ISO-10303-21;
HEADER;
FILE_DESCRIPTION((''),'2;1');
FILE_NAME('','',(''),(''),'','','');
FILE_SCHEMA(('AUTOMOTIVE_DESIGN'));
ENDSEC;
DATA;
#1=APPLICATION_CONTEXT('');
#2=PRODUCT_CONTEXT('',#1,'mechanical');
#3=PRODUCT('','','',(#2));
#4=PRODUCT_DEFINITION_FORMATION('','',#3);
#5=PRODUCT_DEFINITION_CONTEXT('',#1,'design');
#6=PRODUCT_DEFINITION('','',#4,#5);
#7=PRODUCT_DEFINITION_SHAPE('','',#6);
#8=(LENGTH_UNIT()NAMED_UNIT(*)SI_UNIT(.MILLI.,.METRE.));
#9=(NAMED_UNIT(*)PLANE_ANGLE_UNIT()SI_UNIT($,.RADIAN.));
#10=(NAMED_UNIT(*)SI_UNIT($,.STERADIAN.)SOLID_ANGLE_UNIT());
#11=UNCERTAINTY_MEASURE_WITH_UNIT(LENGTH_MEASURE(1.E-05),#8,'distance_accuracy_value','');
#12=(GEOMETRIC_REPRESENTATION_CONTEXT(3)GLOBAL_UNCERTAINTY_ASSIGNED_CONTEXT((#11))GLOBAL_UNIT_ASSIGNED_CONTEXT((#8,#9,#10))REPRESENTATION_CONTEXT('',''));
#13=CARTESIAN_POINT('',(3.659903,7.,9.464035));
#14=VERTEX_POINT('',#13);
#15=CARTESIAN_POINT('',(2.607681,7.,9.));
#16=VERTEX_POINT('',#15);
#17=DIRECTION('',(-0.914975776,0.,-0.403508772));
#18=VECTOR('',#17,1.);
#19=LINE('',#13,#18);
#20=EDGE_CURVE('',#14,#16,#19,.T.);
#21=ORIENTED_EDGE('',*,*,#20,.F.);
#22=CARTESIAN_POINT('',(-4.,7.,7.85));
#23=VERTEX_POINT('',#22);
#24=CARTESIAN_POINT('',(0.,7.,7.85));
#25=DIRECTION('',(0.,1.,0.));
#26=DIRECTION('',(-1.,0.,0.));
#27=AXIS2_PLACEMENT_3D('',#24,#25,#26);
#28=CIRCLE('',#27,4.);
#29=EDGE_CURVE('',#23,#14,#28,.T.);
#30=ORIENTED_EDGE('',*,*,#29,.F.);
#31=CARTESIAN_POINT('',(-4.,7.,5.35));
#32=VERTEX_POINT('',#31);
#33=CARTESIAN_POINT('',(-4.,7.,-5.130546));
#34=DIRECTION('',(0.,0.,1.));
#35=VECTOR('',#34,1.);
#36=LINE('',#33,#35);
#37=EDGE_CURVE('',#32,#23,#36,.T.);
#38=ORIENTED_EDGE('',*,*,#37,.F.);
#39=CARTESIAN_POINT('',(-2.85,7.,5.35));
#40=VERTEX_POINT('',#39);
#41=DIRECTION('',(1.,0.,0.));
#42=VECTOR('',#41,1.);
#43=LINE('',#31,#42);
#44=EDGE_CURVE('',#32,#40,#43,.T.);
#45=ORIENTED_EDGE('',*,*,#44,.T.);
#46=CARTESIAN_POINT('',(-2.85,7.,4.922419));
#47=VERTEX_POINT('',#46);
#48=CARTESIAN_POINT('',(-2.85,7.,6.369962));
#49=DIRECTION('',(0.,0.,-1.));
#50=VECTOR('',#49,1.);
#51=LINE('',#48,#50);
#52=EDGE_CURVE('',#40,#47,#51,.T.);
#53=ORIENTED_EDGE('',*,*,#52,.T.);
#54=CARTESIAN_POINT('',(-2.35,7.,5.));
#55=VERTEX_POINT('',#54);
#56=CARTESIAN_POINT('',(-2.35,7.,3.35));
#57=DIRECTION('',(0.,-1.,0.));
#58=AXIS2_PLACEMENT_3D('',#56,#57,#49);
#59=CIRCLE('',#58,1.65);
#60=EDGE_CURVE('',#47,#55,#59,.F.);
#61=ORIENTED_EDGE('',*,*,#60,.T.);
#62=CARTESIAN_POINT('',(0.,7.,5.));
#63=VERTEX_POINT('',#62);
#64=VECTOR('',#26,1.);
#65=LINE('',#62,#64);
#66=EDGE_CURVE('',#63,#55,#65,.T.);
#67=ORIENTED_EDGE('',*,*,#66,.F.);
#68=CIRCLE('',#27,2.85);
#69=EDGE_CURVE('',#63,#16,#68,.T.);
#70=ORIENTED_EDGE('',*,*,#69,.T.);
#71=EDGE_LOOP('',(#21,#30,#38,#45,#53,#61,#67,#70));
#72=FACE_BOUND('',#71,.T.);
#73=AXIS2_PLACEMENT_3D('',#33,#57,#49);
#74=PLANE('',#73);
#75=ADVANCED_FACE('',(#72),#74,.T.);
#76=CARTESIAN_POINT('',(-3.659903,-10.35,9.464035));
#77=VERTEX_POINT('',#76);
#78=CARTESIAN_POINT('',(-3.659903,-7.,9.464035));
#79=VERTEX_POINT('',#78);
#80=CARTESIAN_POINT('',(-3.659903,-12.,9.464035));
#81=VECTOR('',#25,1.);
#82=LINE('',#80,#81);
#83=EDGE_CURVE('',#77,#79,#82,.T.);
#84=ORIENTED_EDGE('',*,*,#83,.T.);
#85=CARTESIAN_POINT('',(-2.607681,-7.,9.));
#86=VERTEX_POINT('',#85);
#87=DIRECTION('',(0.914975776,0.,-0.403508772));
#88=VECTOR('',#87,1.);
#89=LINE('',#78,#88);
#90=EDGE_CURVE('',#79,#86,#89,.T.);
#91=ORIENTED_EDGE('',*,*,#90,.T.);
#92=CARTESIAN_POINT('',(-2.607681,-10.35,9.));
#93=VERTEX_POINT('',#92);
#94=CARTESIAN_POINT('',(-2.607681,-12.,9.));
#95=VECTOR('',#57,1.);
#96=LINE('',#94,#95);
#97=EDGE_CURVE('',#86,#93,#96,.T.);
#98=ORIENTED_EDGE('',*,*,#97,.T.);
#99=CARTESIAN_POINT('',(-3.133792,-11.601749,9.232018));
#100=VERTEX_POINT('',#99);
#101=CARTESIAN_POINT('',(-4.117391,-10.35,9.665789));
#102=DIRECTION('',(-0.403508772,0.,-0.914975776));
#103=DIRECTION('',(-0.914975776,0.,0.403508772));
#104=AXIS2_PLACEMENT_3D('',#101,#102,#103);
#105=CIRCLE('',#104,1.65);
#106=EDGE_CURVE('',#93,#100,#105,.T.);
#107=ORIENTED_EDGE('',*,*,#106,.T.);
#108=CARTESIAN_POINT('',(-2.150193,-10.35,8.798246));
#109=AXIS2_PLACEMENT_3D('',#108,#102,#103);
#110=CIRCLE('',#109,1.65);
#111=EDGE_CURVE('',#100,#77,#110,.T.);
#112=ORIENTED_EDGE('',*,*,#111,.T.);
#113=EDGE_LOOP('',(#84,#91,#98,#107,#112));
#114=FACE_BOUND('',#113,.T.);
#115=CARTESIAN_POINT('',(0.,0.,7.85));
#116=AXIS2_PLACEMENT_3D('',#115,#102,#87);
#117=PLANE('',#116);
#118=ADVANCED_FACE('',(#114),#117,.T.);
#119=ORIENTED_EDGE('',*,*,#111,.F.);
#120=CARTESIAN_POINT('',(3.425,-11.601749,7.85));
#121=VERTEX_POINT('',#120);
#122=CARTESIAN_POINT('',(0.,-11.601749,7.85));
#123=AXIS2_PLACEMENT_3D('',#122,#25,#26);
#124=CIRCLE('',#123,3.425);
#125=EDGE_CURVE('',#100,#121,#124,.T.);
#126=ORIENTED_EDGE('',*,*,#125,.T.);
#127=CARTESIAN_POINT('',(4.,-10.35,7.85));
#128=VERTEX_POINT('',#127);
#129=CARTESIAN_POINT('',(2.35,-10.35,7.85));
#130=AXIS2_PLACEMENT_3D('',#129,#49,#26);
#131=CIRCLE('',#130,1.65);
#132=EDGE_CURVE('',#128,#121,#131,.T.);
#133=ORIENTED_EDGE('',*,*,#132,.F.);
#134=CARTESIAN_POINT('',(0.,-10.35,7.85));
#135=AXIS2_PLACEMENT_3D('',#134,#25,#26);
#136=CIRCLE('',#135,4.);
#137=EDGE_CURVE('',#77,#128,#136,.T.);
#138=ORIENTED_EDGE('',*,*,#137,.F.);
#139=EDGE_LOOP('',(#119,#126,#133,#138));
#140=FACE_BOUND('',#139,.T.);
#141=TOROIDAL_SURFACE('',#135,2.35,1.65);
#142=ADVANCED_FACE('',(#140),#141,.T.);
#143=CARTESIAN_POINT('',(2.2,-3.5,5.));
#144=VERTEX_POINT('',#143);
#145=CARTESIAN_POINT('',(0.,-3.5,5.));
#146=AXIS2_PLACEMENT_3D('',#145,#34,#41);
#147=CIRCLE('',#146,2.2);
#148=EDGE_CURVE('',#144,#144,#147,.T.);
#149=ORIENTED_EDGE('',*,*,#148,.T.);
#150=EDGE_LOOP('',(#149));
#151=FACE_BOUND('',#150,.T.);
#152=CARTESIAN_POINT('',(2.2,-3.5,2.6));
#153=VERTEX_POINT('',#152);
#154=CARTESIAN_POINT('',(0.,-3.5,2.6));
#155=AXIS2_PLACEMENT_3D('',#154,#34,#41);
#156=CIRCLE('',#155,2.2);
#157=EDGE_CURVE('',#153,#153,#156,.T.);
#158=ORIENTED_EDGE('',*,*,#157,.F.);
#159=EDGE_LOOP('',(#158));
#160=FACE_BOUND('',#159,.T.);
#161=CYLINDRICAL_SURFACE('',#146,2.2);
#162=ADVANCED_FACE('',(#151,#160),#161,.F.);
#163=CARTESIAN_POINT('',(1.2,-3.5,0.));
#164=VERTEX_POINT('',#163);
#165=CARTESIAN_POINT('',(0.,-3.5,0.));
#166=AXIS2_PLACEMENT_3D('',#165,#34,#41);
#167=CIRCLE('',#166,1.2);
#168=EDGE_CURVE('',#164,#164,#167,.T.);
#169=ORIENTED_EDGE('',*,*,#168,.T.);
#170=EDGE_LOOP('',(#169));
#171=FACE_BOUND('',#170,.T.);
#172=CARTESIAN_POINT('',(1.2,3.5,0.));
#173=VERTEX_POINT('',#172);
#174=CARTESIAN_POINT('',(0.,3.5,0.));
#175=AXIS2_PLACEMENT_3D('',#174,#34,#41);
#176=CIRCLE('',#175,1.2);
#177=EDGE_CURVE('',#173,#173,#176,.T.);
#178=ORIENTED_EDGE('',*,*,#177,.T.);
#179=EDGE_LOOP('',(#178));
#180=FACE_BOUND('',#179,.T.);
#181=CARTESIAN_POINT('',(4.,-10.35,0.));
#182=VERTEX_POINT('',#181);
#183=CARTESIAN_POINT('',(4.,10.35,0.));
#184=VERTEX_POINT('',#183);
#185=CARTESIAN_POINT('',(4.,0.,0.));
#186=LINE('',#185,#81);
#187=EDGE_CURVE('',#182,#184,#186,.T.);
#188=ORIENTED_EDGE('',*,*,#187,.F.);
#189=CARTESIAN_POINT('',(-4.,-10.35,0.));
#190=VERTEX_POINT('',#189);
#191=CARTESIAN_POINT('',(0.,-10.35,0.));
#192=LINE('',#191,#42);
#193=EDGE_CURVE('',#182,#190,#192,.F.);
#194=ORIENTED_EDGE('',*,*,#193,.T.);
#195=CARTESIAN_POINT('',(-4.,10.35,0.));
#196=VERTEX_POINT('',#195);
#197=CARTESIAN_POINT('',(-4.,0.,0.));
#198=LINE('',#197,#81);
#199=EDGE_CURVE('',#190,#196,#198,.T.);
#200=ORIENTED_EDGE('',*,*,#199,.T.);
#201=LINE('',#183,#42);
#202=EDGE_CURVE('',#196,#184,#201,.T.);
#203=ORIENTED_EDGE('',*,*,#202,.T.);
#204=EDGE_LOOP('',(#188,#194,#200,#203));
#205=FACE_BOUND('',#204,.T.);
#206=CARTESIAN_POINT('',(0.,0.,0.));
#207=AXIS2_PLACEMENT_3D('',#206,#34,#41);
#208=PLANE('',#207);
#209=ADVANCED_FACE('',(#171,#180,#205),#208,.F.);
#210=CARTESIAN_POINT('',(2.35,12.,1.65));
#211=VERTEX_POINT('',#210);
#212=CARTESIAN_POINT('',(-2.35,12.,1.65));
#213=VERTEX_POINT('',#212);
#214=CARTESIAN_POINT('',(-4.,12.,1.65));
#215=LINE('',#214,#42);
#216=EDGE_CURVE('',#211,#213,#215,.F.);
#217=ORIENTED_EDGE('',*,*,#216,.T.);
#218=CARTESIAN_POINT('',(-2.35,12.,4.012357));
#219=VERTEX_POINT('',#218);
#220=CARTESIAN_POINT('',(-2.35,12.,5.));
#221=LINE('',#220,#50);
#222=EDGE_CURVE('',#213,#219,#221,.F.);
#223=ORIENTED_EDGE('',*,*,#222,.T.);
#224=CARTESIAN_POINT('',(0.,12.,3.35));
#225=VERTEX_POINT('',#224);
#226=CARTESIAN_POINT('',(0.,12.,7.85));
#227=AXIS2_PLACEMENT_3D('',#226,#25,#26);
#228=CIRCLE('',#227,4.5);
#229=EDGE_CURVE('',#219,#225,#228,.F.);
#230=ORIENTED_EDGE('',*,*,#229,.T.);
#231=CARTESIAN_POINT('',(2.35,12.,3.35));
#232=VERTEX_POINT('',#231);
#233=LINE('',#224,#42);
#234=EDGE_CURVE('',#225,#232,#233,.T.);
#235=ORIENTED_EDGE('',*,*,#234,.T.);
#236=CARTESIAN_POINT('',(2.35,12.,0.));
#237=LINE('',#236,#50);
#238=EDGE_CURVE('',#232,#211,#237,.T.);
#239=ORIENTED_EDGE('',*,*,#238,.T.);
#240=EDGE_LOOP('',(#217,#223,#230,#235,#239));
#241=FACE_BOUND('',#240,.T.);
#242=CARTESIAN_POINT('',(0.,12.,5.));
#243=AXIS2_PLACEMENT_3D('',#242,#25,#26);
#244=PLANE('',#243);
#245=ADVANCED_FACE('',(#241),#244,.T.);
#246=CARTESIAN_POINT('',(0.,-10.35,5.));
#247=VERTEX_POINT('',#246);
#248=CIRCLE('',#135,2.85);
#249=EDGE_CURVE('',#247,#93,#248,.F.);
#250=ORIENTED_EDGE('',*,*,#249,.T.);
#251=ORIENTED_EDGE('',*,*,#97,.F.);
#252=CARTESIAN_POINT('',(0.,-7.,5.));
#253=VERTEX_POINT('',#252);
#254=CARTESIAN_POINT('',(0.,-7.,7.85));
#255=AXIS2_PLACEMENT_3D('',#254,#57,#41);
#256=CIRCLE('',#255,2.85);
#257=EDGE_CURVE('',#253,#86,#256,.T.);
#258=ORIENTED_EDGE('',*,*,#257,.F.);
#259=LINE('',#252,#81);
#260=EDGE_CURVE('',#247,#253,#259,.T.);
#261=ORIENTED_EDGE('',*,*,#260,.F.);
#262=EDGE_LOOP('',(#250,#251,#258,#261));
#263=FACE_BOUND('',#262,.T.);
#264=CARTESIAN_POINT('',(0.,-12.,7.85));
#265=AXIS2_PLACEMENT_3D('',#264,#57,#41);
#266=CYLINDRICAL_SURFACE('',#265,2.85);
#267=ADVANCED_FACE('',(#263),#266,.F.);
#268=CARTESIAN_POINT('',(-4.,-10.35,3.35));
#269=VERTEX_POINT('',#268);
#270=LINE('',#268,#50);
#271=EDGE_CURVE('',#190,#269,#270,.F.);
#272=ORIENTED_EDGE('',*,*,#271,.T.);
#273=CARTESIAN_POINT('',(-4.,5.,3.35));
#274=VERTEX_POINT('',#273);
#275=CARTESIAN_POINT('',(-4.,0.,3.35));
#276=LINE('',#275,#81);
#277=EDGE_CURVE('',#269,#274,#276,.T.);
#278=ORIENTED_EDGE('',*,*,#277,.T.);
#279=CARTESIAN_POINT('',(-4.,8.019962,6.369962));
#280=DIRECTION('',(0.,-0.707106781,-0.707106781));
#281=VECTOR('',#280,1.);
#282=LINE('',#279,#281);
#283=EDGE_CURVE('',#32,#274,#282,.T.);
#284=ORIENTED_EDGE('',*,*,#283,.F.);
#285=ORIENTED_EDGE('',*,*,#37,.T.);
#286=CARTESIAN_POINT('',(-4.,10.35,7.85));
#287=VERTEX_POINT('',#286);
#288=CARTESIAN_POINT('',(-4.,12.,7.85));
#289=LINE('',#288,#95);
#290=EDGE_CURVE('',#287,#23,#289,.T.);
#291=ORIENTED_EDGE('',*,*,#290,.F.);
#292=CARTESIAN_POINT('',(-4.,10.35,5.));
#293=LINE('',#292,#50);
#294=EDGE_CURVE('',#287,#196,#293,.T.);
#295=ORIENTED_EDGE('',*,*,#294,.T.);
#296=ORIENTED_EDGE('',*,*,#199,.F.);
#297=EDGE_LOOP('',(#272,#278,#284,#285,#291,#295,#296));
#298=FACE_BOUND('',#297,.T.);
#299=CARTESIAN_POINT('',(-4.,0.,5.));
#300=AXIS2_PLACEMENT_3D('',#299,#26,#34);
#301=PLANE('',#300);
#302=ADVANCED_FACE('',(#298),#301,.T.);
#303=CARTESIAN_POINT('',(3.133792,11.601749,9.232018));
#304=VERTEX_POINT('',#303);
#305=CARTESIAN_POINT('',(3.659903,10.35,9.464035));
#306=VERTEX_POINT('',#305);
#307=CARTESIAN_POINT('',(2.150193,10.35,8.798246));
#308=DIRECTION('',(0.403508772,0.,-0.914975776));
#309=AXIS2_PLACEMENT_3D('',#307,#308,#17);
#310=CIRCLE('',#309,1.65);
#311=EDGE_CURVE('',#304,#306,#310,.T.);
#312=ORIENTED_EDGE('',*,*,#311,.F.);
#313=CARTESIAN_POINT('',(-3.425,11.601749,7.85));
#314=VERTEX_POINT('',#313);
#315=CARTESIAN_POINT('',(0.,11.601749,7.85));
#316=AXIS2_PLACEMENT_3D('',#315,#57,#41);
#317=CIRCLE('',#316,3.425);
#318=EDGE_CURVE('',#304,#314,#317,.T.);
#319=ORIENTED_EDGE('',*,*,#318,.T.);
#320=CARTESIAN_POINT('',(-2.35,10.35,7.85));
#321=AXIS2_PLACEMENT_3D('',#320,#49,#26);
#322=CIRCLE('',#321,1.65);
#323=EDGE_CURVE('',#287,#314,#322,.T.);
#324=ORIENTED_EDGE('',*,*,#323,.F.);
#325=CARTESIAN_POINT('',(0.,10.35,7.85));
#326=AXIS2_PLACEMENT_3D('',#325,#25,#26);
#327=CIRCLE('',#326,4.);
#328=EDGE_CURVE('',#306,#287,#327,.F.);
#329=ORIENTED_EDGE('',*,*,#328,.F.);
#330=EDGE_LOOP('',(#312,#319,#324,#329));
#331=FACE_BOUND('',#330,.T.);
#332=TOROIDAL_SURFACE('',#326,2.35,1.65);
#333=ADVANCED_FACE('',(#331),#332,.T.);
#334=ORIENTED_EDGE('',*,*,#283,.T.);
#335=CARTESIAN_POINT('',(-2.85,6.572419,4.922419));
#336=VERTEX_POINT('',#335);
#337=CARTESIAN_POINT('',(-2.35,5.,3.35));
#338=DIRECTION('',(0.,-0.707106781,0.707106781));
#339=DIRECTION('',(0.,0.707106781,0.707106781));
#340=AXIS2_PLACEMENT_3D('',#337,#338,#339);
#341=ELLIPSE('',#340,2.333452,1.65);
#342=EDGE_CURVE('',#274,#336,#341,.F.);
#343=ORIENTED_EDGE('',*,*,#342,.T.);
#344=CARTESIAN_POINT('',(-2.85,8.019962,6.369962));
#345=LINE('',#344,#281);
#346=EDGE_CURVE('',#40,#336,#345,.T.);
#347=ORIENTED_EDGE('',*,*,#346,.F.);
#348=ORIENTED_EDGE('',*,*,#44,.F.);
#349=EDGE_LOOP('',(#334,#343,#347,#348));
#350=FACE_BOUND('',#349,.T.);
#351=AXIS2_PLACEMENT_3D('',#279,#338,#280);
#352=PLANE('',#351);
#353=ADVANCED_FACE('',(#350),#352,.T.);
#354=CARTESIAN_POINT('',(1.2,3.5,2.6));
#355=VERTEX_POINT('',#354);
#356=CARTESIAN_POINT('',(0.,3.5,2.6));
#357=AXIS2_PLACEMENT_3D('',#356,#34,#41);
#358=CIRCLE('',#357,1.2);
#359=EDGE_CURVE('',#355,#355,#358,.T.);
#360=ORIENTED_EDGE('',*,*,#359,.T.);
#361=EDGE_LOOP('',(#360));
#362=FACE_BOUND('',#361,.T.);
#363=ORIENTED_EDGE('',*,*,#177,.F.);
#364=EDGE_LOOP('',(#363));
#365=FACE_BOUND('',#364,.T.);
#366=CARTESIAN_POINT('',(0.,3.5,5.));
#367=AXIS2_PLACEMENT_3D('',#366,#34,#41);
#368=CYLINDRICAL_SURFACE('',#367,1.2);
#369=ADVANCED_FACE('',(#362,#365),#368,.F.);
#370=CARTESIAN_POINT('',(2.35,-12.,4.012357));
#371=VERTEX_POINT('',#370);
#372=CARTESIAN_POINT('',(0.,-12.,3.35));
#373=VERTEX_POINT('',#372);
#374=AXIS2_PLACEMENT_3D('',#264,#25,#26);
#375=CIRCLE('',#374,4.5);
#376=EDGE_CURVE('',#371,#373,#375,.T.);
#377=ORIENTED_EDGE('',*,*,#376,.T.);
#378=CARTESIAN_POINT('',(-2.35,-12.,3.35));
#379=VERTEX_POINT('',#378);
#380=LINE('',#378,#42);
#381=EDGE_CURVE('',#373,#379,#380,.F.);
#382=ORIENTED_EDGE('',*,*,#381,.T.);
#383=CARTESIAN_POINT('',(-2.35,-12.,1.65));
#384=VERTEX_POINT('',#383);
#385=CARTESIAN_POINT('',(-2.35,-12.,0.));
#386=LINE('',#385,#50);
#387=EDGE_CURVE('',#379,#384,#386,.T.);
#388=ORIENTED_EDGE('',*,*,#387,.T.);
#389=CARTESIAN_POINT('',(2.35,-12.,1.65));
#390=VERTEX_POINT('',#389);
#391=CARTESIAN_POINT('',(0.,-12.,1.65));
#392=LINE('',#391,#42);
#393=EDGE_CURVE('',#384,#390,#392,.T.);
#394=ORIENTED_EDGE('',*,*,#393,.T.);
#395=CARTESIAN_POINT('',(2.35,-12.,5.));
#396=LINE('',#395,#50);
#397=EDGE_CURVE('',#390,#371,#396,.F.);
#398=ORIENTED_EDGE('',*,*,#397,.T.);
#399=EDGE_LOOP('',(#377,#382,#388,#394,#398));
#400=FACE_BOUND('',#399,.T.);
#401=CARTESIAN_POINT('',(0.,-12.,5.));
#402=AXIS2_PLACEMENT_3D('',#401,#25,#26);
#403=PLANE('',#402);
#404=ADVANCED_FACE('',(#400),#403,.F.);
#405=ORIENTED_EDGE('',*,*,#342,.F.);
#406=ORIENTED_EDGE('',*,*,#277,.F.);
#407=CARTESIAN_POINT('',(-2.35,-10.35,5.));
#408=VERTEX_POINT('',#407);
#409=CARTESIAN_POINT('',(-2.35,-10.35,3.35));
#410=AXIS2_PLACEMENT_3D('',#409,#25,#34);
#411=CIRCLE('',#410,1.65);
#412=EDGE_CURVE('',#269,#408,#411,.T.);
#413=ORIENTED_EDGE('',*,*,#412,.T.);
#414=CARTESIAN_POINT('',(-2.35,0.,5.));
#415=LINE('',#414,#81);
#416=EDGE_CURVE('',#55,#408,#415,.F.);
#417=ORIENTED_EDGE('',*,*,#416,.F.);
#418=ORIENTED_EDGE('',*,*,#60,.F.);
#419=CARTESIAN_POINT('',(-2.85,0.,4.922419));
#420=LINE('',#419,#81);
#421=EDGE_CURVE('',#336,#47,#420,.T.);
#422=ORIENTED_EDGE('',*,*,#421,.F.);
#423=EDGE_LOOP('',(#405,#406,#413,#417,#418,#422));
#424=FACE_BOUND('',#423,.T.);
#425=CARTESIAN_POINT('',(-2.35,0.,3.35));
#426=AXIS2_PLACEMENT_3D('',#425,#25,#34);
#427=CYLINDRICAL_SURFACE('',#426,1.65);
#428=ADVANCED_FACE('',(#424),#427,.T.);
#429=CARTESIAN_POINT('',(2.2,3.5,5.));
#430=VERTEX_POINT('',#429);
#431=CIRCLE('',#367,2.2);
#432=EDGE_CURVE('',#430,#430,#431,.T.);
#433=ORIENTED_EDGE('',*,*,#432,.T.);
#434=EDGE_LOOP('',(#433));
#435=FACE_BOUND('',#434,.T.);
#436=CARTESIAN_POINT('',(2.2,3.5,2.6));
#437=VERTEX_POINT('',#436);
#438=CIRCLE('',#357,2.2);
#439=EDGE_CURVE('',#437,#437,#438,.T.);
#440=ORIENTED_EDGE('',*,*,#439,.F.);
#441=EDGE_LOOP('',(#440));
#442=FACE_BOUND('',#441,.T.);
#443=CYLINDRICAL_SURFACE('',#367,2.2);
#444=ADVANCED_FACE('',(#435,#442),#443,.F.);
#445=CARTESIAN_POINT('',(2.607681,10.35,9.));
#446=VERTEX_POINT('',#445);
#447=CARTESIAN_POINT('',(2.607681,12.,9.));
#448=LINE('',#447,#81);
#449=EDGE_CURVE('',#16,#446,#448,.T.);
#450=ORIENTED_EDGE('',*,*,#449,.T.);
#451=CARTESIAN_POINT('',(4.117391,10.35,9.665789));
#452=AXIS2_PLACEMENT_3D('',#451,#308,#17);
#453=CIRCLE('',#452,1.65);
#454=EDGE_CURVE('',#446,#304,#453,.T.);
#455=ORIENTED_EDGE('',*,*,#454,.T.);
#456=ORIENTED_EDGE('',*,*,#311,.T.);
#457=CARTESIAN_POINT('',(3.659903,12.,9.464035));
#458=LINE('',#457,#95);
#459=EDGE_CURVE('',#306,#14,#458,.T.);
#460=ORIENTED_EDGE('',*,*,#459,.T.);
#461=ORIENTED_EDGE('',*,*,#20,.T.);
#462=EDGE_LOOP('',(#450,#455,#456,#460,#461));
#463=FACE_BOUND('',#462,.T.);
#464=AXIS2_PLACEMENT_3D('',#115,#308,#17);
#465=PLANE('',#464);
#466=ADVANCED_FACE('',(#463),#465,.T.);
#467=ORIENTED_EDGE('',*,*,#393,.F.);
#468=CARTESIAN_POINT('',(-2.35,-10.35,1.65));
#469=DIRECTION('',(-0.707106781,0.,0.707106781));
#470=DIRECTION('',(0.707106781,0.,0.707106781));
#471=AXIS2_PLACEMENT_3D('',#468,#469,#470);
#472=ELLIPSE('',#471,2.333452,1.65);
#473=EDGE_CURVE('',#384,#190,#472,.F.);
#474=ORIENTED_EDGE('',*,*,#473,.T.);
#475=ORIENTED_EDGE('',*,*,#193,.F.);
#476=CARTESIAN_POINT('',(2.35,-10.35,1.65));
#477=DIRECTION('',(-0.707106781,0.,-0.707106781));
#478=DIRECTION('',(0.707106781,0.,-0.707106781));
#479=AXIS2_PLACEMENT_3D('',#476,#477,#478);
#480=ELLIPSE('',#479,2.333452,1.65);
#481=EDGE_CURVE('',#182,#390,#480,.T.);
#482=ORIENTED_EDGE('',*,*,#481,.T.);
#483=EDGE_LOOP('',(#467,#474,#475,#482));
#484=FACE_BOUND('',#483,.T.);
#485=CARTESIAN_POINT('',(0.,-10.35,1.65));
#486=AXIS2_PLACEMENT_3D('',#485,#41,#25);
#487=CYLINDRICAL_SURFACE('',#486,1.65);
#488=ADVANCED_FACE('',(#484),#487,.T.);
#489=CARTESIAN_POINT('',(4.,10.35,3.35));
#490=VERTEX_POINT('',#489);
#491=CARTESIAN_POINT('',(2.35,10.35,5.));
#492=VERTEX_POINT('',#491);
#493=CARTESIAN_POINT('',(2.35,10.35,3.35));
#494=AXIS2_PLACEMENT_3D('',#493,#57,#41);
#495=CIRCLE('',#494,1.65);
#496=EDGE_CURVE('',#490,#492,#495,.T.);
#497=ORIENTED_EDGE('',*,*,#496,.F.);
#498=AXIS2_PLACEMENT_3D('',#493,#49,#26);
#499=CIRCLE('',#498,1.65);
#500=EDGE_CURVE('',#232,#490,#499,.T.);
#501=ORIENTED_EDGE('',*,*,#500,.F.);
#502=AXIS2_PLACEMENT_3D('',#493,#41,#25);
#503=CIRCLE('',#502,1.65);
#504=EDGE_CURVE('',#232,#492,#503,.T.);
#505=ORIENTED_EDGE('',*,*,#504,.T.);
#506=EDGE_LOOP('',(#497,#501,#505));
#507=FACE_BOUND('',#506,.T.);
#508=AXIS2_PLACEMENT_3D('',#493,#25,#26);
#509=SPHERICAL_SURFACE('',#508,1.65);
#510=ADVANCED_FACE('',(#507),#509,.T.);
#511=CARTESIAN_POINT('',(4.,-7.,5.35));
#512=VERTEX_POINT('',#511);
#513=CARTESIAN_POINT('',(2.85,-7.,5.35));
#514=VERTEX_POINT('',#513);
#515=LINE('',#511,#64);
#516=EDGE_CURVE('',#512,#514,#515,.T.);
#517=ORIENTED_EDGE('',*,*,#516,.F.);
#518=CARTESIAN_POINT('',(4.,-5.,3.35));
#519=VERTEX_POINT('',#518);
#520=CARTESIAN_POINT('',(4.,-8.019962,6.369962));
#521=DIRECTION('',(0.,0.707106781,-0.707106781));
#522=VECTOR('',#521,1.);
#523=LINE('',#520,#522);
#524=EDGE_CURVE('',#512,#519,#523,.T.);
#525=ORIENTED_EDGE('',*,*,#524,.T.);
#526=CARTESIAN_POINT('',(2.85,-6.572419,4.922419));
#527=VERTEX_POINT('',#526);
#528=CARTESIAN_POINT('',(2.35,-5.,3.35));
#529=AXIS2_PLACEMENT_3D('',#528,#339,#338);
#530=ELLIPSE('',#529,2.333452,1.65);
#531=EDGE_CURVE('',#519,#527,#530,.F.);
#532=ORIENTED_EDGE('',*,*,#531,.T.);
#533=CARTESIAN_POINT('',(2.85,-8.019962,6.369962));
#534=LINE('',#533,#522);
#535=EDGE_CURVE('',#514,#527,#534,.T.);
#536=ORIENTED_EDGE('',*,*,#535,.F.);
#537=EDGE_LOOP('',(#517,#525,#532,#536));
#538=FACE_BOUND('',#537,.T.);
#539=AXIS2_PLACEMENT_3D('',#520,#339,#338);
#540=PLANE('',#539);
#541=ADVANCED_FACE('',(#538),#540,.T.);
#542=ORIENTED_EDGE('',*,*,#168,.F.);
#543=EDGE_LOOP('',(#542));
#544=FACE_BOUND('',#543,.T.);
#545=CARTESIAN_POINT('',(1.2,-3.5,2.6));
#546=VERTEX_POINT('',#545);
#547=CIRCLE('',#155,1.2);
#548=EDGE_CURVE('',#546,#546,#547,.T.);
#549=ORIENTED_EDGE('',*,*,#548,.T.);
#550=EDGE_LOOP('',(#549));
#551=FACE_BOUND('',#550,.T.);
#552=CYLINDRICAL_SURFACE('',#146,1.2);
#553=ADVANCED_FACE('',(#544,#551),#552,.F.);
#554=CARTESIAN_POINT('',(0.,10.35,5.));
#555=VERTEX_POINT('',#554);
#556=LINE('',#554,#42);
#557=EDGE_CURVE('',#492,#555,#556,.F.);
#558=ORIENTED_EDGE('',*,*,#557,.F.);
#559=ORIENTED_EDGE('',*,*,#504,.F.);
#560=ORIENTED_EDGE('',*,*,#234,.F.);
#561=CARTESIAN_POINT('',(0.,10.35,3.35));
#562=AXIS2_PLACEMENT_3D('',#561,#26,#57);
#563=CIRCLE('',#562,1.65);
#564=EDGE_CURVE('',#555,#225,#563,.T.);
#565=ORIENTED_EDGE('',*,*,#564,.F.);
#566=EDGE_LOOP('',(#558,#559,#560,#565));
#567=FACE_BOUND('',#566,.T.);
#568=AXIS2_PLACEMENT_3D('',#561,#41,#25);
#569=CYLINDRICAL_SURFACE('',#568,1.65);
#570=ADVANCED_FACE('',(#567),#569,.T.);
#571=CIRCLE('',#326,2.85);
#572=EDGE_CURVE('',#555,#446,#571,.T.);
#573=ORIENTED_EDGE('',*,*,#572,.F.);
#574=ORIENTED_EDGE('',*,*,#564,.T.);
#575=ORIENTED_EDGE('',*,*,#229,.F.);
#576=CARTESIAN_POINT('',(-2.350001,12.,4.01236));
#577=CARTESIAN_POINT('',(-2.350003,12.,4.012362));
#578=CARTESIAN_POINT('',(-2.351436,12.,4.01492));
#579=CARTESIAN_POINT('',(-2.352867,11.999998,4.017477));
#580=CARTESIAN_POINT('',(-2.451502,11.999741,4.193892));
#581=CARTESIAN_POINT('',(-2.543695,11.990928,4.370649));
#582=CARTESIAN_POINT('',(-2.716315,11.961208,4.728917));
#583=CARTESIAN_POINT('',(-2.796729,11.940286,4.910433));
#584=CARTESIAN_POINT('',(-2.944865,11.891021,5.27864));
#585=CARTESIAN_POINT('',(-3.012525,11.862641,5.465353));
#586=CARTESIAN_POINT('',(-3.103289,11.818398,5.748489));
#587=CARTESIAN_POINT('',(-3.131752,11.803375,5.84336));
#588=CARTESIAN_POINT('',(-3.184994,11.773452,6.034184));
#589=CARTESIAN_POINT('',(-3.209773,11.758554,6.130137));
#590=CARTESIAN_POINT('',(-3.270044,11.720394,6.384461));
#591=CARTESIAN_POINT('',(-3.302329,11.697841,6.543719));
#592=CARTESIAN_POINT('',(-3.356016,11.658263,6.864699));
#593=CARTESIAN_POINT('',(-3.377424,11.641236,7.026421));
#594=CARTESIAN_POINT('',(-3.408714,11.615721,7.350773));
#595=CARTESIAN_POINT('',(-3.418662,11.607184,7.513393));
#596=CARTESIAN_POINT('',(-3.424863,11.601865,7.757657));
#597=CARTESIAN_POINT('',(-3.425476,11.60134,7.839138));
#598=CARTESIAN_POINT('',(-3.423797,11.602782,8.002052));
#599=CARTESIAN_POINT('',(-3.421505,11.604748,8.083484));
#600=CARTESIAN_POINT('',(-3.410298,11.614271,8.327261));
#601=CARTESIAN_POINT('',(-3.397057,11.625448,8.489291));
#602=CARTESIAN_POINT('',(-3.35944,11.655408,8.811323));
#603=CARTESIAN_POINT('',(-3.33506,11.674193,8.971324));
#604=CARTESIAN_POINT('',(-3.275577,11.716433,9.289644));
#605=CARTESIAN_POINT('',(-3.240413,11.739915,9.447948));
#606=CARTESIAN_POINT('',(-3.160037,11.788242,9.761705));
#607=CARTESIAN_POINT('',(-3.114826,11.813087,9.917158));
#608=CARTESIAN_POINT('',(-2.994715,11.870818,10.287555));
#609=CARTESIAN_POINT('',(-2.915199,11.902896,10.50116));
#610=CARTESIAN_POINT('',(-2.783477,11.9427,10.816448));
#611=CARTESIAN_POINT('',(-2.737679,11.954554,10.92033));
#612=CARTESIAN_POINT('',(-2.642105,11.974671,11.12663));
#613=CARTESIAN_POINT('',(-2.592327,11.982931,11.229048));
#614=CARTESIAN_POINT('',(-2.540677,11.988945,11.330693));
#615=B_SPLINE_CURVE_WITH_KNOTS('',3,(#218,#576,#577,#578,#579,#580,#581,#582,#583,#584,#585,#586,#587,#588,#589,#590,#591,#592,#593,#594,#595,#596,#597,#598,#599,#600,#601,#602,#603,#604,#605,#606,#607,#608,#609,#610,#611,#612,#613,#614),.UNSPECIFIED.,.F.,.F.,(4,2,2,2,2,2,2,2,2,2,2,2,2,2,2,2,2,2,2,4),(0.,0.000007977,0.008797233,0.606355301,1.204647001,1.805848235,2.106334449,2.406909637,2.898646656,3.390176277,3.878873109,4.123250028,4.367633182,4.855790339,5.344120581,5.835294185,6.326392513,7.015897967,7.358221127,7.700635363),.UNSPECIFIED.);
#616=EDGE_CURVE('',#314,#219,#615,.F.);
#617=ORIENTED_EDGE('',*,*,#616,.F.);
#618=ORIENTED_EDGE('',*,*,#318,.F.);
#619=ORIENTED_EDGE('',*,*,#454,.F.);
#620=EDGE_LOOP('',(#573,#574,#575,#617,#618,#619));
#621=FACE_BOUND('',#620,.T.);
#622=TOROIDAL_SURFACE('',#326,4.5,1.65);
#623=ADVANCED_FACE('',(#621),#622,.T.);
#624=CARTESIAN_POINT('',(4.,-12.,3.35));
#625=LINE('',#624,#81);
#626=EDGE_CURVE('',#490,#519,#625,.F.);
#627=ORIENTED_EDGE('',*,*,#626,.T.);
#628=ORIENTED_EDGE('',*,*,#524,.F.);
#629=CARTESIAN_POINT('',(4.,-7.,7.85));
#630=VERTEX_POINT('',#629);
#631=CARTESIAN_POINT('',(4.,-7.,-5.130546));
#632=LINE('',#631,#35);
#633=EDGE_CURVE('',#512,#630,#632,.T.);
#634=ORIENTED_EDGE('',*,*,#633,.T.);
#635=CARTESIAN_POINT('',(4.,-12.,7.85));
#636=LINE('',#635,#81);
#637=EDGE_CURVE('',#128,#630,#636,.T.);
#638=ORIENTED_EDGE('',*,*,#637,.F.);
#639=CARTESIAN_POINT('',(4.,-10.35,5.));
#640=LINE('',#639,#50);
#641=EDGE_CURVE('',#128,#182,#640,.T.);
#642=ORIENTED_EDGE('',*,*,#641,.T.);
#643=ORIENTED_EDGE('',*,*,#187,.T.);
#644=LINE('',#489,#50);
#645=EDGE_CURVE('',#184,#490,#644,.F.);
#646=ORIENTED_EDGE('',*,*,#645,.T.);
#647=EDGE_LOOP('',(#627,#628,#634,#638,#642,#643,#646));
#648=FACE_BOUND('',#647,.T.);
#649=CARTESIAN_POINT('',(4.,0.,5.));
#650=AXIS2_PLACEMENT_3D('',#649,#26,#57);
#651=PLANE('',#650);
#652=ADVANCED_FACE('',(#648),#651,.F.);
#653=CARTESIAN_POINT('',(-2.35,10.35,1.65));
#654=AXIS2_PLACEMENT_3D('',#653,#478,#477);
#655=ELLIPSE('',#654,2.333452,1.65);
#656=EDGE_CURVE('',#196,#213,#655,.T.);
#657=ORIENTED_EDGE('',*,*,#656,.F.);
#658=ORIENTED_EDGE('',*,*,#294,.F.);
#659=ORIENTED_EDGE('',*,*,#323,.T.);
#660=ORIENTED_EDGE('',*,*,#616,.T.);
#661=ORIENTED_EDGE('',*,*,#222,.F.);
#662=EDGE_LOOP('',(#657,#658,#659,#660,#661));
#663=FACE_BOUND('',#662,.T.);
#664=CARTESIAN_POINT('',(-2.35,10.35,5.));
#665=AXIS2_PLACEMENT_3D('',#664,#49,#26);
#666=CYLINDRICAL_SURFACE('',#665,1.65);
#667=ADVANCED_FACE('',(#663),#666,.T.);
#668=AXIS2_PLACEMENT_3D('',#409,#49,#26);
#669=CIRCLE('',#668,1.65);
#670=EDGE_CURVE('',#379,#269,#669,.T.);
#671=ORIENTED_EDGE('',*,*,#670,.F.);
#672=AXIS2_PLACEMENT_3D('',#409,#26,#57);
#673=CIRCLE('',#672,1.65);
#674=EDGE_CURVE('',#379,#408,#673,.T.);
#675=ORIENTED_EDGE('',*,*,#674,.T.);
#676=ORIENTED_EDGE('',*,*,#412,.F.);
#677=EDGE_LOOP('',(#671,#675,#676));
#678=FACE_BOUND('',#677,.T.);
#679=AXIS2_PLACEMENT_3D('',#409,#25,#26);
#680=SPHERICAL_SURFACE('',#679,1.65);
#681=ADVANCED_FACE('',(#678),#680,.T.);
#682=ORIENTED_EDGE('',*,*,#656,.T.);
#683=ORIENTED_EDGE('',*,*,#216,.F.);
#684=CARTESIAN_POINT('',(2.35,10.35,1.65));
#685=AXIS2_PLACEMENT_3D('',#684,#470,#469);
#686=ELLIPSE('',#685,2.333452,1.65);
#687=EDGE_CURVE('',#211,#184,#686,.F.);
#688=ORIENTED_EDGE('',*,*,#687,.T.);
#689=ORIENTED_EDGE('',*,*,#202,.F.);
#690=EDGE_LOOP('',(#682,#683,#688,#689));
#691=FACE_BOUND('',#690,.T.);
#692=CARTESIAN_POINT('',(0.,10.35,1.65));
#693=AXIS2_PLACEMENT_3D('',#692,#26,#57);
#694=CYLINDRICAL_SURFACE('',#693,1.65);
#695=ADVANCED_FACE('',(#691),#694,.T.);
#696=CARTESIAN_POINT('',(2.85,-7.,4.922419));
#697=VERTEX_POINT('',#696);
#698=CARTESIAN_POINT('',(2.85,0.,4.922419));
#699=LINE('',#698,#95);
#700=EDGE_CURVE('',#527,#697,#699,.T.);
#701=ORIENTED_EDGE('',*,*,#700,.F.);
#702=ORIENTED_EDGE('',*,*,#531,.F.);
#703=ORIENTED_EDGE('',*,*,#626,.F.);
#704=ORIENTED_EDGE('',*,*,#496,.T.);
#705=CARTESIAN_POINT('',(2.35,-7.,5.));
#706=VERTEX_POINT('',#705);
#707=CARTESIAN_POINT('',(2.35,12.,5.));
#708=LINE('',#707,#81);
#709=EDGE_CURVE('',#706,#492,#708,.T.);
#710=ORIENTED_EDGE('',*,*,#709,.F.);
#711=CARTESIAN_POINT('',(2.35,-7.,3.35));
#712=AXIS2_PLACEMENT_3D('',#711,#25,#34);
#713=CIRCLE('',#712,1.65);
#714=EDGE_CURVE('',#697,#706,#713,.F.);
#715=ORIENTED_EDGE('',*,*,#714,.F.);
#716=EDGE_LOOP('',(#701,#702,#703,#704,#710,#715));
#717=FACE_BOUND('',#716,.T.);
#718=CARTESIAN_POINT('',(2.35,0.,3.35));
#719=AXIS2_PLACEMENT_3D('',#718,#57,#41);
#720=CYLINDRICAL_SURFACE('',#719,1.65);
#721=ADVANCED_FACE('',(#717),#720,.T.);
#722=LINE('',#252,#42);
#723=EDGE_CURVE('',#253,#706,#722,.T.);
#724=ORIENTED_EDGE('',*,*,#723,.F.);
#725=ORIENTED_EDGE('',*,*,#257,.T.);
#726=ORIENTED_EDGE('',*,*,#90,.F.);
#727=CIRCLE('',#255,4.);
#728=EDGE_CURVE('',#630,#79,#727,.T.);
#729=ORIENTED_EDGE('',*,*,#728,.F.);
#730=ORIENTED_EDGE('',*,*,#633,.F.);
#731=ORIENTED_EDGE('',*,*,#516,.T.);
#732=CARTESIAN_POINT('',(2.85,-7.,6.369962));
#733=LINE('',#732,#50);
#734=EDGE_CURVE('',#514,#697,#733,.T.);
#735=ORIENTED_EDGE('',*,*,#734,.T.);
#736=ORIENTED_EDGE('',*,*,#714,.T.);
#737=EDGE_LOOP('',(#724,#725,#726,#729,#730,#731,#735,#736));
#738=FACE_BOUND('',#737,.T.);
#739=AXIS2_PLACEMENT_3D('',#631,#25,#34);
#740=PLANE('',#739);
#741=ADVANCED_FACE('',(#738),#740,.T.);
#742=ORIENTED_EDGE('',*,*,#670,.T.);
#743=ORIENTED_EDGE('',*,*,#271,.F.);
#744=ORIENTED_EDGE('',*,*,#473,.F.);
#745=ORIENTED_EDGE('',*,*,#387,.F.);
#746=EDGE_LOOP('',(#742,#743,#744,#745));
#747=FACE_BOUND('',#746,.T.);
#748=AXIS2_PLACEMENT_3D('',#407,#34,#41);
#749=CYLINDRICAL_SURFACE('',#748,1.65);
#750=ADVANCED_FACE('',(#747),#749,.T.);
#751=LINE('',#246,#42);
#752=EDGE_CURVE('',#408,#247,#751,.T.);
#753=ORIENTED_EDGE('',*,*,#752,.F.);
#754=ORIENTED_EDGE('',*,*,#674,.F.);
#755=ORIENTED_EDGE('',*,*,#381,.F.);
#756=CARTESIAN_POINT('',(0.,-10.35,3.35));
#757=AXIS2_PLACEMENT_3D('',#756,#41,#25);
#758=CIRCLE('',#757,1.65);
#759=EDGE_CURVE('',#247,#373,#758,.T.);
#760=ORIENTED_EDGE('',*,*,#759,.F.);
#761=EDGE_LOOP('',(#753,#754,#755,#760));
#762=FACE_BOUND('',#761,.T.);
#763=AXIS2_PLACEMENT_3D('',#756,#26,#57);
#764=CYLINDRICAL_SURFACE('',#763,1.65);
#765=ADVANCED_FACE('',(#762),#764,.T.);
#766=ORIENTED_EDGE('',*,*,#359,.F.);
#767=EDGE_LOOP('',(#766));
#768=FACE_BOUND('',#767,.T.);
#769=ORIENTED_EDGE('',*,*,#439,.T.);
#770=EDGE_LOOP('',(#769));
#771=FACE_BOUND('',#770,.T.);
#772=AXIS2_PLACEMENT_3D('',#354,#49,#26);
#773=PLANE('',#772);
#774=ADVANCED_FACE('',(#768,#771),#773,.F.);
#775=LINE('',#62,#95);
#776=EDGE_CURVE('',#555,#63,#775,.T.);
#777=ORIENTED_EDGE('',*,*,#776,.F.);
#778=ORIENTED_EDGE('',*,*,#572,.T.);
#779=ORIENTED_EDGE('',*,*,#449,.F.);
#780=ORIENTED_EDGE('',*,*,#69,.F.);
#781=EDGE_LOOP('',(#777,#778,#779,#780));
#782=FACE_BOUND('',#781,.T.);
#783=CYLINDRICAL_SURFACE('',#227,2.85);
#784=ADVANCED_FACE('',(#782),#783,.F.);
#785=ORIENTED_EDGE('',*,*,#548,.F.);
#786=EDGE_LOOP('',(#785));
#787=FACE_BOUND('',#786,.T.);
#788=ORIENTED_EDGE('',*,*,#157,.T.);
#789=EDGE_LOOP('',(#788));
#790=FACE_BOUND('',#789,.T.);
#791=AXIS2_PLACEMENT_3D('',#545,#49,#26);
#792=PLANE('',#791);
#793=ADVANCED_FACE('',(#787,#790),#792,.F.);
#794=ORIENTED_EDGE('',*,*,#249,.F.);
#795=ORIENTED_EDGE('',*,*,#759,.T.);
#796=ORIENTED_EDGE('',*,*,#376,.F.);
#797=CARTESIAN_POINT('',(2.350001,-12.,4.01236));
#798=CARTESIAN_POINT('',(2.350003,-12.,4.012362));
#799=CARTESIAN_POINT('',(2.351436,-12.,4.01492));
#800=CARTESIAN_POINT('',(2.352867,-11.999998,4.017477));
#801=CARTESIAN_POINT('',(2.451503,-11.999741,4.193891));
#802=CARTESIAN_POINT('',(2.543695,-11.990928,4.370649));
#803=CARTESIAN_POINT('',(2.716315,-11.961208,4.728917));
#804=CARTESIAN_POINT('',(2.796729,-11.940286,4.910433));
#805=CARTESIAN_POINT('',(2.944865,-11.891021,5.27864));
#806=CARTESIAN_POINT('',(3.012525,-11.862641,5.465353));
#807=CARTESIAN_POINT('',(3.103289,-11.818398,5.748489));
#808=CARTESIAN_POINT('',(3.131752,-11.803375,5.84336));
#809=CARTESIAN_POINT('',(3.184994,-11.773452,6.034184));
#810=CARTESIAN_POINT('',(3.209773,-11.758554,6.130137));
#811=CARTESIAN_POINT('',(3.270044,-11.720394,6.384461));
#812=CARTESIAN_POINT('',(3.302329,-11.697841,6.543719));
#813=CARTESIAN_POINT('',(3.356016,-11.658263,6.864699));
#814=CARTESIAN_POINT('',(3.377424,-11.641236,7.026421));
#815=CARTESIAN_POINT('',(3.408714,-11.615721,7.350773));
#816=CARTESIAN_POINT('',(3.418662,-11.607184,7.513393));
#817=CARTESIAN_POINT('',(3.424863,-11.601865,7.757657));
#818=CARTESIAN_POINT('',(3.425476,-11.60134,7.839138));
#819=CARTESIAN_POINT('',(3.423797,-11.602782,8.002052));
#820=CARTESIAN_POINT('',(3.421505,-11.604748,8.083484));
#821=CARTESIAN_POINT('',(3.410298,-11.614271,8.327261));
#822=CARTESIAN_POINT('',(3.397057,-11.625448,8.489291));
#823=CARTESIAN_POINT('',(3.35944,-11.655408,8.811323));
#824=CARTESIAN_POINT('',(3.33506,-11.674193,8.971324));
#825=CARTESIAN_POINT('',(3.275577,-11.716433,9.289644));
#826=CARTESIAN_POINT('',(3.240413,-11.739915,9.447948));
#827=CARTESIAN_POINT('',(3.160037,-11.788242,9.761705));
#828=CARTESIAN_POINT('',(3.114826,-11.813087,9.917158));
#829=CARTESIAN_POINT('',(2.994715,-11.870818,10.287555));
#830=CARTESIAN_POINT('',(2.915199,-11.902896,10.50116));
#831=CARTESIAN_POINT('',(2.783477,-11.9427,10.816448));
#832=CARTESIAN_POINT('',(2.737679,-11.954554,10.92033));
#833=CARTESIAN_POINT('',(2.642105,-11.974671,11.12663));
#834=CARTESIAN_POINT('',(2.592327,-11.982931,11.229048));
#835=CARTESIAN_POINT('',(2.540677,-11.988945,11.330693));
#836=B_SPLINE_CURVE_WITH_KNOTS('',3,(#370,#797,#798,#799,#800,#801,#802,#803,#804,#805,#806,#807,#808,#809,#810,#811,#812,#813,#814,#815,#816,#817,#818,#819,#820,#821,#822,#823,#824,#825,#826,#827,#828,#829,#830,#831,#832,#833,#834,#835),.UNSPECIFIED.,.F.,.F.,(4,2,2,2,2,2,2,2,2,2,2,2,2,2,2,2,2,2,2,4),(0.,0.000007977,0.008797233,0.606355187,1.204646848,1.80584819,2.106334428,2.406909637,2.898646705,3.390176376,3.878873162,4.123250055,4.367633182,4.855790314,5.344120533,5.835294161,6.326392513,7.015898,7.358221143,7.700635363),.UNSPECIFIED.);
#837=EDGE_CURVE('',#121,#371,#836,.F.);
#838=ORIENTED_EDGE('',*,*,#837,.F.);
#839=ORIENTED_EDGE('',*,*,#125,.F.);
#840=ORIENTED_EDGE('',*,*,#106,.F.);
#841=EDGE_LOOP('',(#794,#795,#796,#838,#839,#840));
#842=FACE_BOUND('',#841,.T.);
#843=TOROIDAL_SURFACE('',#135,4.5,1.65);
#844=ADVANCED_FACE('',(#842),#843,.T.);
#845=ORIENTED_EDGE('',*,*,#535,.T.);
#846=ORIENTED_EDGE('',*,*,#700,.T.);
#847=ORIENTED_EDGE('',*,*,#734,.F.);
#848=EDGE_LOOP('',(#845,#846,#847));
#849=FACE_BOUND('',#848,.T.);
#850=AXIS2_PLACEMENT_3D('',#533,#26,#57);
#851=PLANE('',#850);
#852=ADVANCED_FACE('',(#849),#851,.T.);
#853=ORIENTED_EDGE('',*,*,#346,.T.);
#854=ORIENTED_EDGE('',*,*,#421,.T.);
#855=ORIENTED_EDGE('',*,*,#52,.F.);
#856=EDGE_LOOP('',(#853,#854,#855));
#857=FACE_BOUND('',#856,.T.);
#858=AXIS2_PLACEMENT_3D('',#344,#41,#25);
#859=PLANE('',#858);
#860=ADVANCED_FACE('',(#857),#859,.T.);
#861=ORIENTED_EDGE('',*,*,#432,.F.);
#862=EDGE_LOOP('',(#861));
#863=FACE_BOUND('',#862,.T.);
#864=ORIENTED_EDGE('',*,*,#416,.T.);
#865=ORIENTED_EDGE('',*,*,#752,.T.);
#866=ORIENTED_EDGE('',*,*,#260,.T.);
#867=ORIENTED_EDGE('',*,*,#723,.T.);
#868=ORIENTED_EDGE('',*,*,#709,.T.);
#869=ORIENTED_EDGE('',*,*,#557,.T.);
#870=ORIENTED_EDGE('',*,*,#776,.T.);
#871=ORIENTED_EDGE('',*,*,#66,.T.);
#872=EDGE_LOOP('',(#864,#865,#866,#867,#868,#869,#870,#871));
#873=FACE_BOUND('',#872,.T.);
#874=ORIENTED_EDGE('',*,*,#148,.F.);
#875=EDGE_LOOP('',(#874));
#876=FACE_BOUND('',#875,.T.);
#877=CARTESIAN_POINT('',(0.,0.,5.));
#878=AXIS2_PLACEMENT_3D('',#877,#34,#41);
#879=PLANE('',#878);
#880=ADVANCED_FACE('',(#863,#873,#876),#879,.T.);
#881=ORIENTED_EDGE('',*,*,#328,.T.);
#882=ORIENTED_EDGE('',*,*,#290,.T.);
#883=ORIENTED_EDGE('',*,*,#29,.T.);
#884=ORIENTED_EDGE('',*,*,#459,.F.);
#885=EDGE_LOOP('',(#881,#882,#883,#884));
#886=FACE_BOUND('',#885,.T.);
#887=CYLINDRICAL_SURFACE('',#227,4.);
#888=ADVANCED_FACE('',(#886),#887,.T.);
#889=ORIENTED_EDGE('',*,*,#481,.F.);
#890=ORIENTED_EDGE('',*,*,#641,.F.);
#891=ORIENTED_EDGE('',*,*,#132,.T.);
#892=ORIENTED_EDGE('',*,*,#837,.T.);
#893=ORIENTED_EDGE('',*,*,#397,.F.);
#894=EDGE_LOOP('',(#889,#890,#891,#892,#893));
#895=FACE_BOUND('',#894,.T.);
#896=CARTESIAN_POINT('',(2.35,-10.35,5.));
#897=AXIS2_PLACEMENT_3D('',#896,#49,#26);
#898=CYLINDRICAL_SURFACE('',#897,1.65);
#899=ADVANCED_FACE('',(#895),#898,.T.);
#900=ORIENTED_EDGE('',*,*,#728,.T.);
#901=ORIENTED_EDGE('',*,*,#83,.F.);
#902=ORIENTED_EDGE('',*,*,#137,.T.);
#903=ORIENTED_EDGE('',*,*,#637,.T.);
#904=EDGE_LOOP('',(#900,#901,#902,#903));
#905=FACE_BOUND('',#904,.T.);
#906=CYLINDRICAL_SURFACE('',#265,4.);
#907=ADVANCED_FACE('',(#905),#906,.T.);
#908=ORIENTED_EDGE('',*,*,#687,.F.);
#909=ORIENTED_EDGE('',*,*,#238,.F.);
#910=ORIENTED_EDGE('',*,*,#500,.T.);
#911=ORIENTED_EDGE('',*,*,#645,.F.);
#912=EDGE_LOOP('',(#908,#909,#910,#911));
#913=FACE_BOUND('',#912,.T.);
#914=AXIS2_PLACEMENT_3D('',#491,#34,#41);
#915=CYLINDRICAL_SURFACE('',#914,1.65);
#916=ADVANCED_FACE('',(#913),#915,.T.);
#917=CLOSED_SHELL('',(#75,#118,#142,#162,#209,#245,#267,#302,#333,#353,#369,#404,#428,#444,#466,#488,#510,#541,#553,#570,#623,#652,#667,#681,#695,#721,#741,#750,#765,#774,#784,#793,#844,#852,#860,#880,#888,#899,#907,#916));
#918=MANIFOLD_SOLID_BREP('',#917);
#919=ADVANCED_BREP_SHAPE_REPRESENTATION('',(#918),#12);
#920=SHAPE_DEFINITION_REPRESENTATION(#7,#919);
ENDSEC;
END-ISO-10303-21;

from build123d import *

# Parameters (mm, degrees)
BASE_DEPTH                                          = 5
BASE_FILLET_R                                       = 1.65
HOOK_BASE_REACH                                     = 15.601
HOOK_BASE_END_RADIUS                                = 1.65
CBORE_FOR_M2_HEX_SOCKET_HEAD_CAP_SCREW1_D           = 2.4
CBORE_FOR_M2_HEX_SOCKET_HEAD_CAP_SCREW1_DEPTH       = 7.25
CBORE_FOR_M2_HEX_SOCKET_HEAD_CAP_SCREW1_CBORE_D     = 4.4
CBORE_FOR_M2_HEX_SOCKET_HEAD_CAP_SCREW1_CBORE_DEPTH = 2.4
CBORE_FOR_M2_HEX_SOCKET_HEAD_CAP_SCREW1_TIP         = 0.7210327428330723
SKETCH16_W                                          = 5.000000000000002
SKETCH16_H                                          = 1.65
SKETCH6_W                                           = 1.1499999999999981
SKETCH6_H                                           = 2.0000000000000004
CUT_EXTRUDE4_DEPTH                                  = 7.85
CIRPATTERN1_COUNT                                   = 2
FILLET1_R                                           = 1.65


with BuildPart() as part:
    # Sketch1 → Base (new body)
    # profile 1 of 2: a face of its own
    with BuildSketch(Plane(origin=(0, 0, 0), x_dir=(0, 1, 0), z_dir=(0, 0, 1))):
        Polygon((12.000000000000002, 4), (12.000000000000004, -3.9999999999999947), (-12, -4), (-12.000000000000002, 4), align=None)
        Polygon((-10, 2.35), (10, 2.35), (10, -2.35), (-9.999999999999998, -2.35), align=None, mode=Mode.SUBTRACT)
    # profile 2 of 2: a face of its own
    with BuildSketch(Plane(origin=(0, 0, 0), x_dir=(0, 1, 0), z_dir=(0, 0, 1))):
        Polygon((10, 2.35), (10, -2.35), (-9.999999999999998, -2.35), (-10, 2.35), align=None)
    extrude(amount=BASE_DEPTH)

    # Base-Fillet
    base_fillet_edges = [part.edges().sort_by_distance(p)[0] for p in [
        (-4, 0, 5),
        (3.9999999999999973, 1.78e-15, 5),
    ]]
    fillet(base_fillet_edges, radius=BASE_FILLET_R)

    # Hook Base: up to this cylinder (the profile starts outside it)
    hook_base_end = Plane(origin=(-2.35, 9.5, 3.35), z_dir=(0, 1, 0)) * Cylinder(HOOK_BASE_END_RADIUS, 35.502, mode=Mode.PRIVATE)
    # Sketch - Hook Base → Hook Base (add, up to the surface)
    with BuildSketch(Plane.XY.offset(5), mode=Mode.PRIVATE) as hook_base_sk1:
        Polygon((-4, 12.000000000000002), (-2.850000000000002, 12.000000000000004), (-2.850000000000002, 7.000000000000002), (-3.9999999999999982, 7.000000000000002), align=None)
    hook_base_tool1 = extrude(hook_base_sk1.sketch, amount=-HOOK_BASE_REACH, mode=Mode.PRIVATE) - hook_base_end
    hook_base = hook_base_tool1.solids().sort_by_distance((-3.425, 9.5, 5))[0]
    add(hook_base)

    # Hook: sweep along a path in Hook Path
    with BuildLine(Plane(origin=(-2.6e-15, 12.000000000000004, 0), x_dir=(-1, -2.2e-16, 0), z_dir=(-2.2e-16, 1, 0))) as hook_path:
        Line((2.849999999999999, 5.000000000000002), (2.85, 7.850000000000001))
        ThreePointArc((2.85, 7.850000000000001), (0.5876262664606571, 10.638762336766174), (-2.6076809620810604, 9.000000000000002))
    # Sketch - Hook Base<3> → Hook (sweep)
    with BuildSketch(Plane.XY.offset(5)):
        Polygon((-4, 12.000000000000002), (-2.850000000000002, 12.000000000000004), (-2.850000000000002, 7.000000000000002), (-3.9999999999999982, 7.000000000000002), align=None)
    hook = sweep(path=hook_path.line)

    # CBORE for M2 Hex Socket Head Cap Screw1
    with Locations(Plane(origin=(0, 0, 5), x_dir=(0, -1, 0), z_dir=(0, 0, 1))):
        with Locations((3.5, 0), (-3.5, 0)):
            CounterBoreHole(CBORE_FOR_M2_HEX_SOCKET_HEAD_CAP_SCREW1_D / 2, CBORE_FOR_M2_HEX_SOCKET_HEAD_CAP_SCREW1_CBORE_D / 2, CBORE_FOR_M2_HEX_SOCKET_HEAD_CAP_SCREW1_CBORE_DEPTH, depth=CBORE_FOR_M2_HEX_SOCKET_HEAD_CAP_SCREW1_DEPTH)
            with Locations((0, 0, -(CBORE_FOR_M2_HEX_SOCKET_HEAD_CAP_SCREW1_DEPTH + CBORE_FOR_M2_HEX_SOCKET_HEAD_CAP_SCREW1_TIP / 2))):  # 118° drill point
                Cone(0, CBORE_FOR_M2_HEX_SOCKET_HEAD_CAP_SCREW1_D / 2, CBORE_FOR_M2_HEX_SOCKET_HEAD_CAP_SCREW1_TIP, mode=Mode.SUBTRACT)

    # Sweep1: sweep along a path in Sketch15
    with BuildLine(Plane(origin=(-2.6e-15, 12.000000000000004, 0), x_dir=(-1, -2.2e-16, 0), z_dir=(-2.2e-16, 1, 0))) as sweep1_path:
        ThreePointArc((-8.7e-16, 5), (2.0152543263816596, 5.83474567361834), (2.849999999999999, 7.85))
    # Sketch16 → Sweep1 (sweep)
    with BuildSketch(Plane.YZ):
        with Locations((9.500000000000004, 4.175)):
            Rectangle(SKETCH16_W, SKETCH16_H)
    sweep1 = sweep(path=sweep1_path.line)

    # Sweep - Hook Rib: sweep along a path in Sketch8
    with BuildLine(Plane.YZ.offset(-3.425000000000001)) as sweep_hook_rib_path:
        Line((7.000000000000002, 5.3500000000000005), (4.999999999999995, 3.35))
    # Sketch6 → Sweep - Hook Rib (sweep)
    with BuildSketch(Plane.XZ.offset(-7.000000000000002)):
        with Locations((-3.4250000000000007, 4.3500000000000005)):
            Rectangle(SKETCH6_W, SKETCH6_H)
    sweep_hook_rib = sweep(path=sweep_hook_rib_path.line)

    # Sketch19 → Cut-Extrude4 (cut)
    with BuildSketch(Plane.XY.offset(7.85)):
        Polygon((-3.999999999999999, 7.000000000000002), (-3.999999999999999, 12.000000000000004), (-4.500000000000001, 12.000000000000002), (-4.499999999999999, 7.000000000000001), align=None)
    cut_extrude4 = extrude(amount=-CUT_EXTRUDE4_DEPTH, mode=Mode.SUBTRACT)

    # CirPattern1: Hook Base, Hook, Sweep1, Sweep - Hook Rib, Cut-Extrude4 ×2 about axis
    cirpattern1_axis = Axis((-6e-16, 1.16e-15, 0), (0, 0, 1))
    add([hook_base.rotate(cirpattern1_axis, i * 360 / CIRPATTERN1_COUNT) for i in range(1, CIRPATTERN1_COUNT)])
    add([hook.rotate(cirpattern1_axis, i * 360 / CIRPATTERN1_COUNT) for i in range(1, CIRPATTERN1_COUNT)])
    add([sweep1.rotate(cirpattern1_axis, i * 360 / CIRPATTERN1_COUNT) for i in range(1, CIRPATTERN1_COUNT)])
    add([sweep_hook_rib.rotate(cirpattern1_axis, i * 360 / CIRPATTERN1_COUNT) for i in range(1, CIRPATTERN1_COUNT)])
    add([cut_extrude4.rotate(cirpattern1_axis, i * 360 / CIRPATTERN1_COUNT) for i in range(1, CIRPATTERN1_COUNT)], mode=Mode.SUBTRACT)

    # Fillet1
    # the kernel refuses this fillet: 1.65 mm, written as the material it takes off along each edge
    with BuildSketch(Plane(origin=(-3.999999999999999, -12.000000000000002, -4.125000000000005), x_dir=(1, 0, 0), z_dir=(0, 0, 1))) as fillet1_piece_1:
        with BuildLine():
            CenterArc((FILLET1_R, FILLET1_R), FILLET1_R, 179.99999999999994, 90.00000000000006)
            Line((0, FILLET1_R), (0, 0))
            Line((0, 0), (FILLET1_R, 0))
        make_face()
    extrude(amount=7.475000000000006, mode=Mode.SUBTRACT)
    with BuildSketch(Plane(origin=(3.7e-16, -12.000000000000002, 7.850000000000004), x_dir=(-0.5093397654793319, 0, -0.8605655136603251), z_dir=(0.8605655136603251, 0, -0.5093397654793319))) as fillet1_piece_2:
        with BuildLine():
            CenterArc((2.8500000000000036 + FILLET1_R, FILLET1_R), FILLET1_R, 180, 90)
            Line((2.8500000000000036, FILLET1_R), (2.8500000000000036, 0))
            Line((2.8500000000000036, 0), (2.8500000000000036 + FILLET1_R, 0))
        make_face()
    revolve(axis=Axis((3.7e-16, -12.000000000000002, 7.850000000000004), (0, 1, 0)), revolution_arc=329.3801381453189, mode=Mode.SUBTRACT)
    with BuildSketch(Plane(origin=(3.9999999999999947, 12.000000000000004, -4.125000000000001), x_dir=(-1, 0, 0), z_dir=(0, 0, 1))) as fillet1_piece_3:
        with BuildLine():
            CenterArc((FILLET1_R, FILLET1_R), FILLET1_R, 180, 90)
            Line((-8.9e-16, FILLET1_R), (0, 0))
            Line((0, 0), (FILLET1_R, 0))
        make_face()
    extrude(amount=7.475000000000001, mode=Mode.SUBTRACT)
    with BuildSketch(Plane(origin=(3.9999999999999987, -12, 7.85), x_dir=(5.4e-16, 1, 0), z_dir=(-6e-17, 0, -1))) as fillet1_piece_4:
        with BuildLine():
            CenterArc((FILLET1_R, -FILLET1_R), FILLET1_R, 89.99999999999997, 90.00000000000003)
            Line((8.9e-16, -FILLET1_R), (0, 0))
            Line((0, 0), (FILLET1_R, 0))
        make_face()
    extrude(amount=11.975000000000005, mode=Mode.SUBTRACT)
    with BuildSketch(Plane(origin=(-2.66e-15, -12.000000000000002, 5), x_dir=(0, 0, -1), z_dir=(-1, -2.2e-16, 0))) as fillet1_piece_5:
        with BuildLine():
            CenterArc((FILLET1_R, -FILLET1_R), FILLET1_R, 90, 90)
            Line((0, -FILLET1_R), (0, 0))
            Line((0, 0), (FILLET1_R, 0))
        make_face()
    extrude(amount=2.349999999999998, mode=Mode.SUBTRACT)
    with BuildSketch(Plane(origin=(-3.05e-15, 12.000000000000004, 7.850000000000004), x_dir=(0.5093397654793319, 0, -0.8605655136603251), z_dir=(-0.8605655136603251, 0, -0.5093397654793319))) as fillet1_piece_6:
        with BuildLine():
            CenterArc((2.8500000000000036 + FILLET1_R, FILLET1_R), FILLET1_R, 180, 90)
            Line((2.8500000000000036, FILLET1_R), (2.8500000000000036, 0))
            Line((2.8500000000000036, 0), (2.8500000000000036 + FILLET1_R, 0))
        make_face()
    revolve(axis=Axis((-3.05e-15, 12.000000000000004, 7.850000000000004), (0, -1, 0)), revolution_arc=329.3801381453189, mode=Mode.SUBTRACT)
    with BuildSketch(Plane(origin=(8.125, -11.999999999999998, 0), x_dir=(0, 0, 1), z_dir=(-1, -2.2e-16, 0))) as fillet1_piece_7:
        with BuildLine():
            CenterArc((FILLET1_R, FILLET1_R), FILLET1_R, 180, 90)
            Line((-2.2e-16, FILLET1_R), (0, 0))
            Line((0, 0), (FILLET1_R, 0))
        make_face()
    extrude(amount=16.25, mode=Mode.SUBTRACT)
    with BuildSketch(Plane(origin=(-8.125, 12, 0), x_dir=(0, 0, 1), z_dir=(1, 2.2e-16, 0))) as fillet1_piece_8:
        with BuildLine():
            CenterArc((FILLET1_R, FILLET1_R), FILLET1_R, 180, 90)
            Line((-2.2e-16, FILLET1_R), (0, 0))
            Line((0, 0), (FILLET1_R, 0))
        make_face()
    extrude(amount=16.249999999999993, mode=Mode.SUBTRACT)
    with BuildSketch(Plane(origin=(0, 12.000000000000004, 5), x_dir=(0, 0, -1), z_dir=(1, 2.2e-16, 0))) as fillet1_piece_9:
        with BuildLine():
            CenterArc((FILLET1_R, -FILLET1_R), FILLET1_R, 90, 90)
            Line((0, -FILLET1_R), (0, 0))
            Line((0, 0), (FILLET1_R, 0))
        make_face()
    extrude(amount=2.349999999999995, mode=Mode.SUBTRACT)
    with BuildSketch(Plane(origin=(-3.999999999999999, 12.000000000000002, -4.124999999999998), x_dir=(1, 0, 2.3e-16), z_dir=(-2.3e-16, -4.5e-16, 1))) as fillet1_piece_10:
        with BuildLine():
            CenterArc((FILLET1_R, -FILLET1_R), FILLET1_R, 90.00000000000001, 89.99999999999999)
            Line((0, -FILLET1_R), (0, 0))
            Line((0, 0), (FILLET1_R, 0))
        make_face()
    extrude(amount=11.974999999999998, mode=Mode.SUBTRACT)
    with BuildSketch(Plane(origin=(3.7e-16, -12, 7.850000000000004), x_dir=(1, 0, -1.33e-15), z_dir=(-1.33e-15, 0, -1))) as fillet1_piece_11:
        with BuildLine():
            CenterArc((3.9999999999999982 - FILLET1_R, -FILLET1_R), FILLET1_R, 6.168e-14, 89.99999999999994)
            Line((3.9999999999999982, -FILLET1_R), (3.9999999999999982, 0))
            Line((3.9999999999999982, 0), (3.9999999999999982 - FILLET1_R, 0))
        make_face()
    revolve(axis=Axis((3.7e-16, -12, 7.850000000000004), (-1.2e-16, -1, 0)), revolution_arc=215.36009714129503, mode=Mode.SUBTRACT)
    with BuildSketch(Plane(origin=(2.349999999999995, 12.000000000000004, 3.3500000000000005), x_dir=(1, 0, 0), z_dir=(0, 0, -1))) as fillet1_piece_12:
        with BuildLine():
            CenterArc((1.65 - FILLET1_R, FILLET1_R), FILLET1_R, 270, 90.00000000000001)
            Line((1.6500000000000004, FILLET1_R), (1.65, 0))
            Line((1.65, 0), (1.65 - FILLET1_R, 0))
        make_face()
    revolve(axis=Axis((2.349999999999995, 12.000000000000004, 3.3500000000000005), (2.2e-16, -1, 0)), revolution_arc=90, mode=Mode.SUBTRACT)
    with BuildSketch(Plane(origin=(-2.3500000000000005, -12, 3.3500000000000005), x_dir=(-1, 0, -2.7e-16), z_dir=(2.7e-16, 0, -1))) as fillet1_piece_13:
        with BuildLine():
            CenterArc((1.6499999999999995 - FILLET1_R, FILLET1_R), FILLET1_R, 270, 90.00000000000007)
            Line((1.6499999999999995, FILLET1_R), (1.6499999999999995, 0))
            Line((1.6499999999999995, 0), (1.6499999999999995 - FILLET1_R, -1.78e-15))
        make_face()
    revolve(axis=Axis((-2.3500000000000005, -12, 3.3500000000000005), (0, 1, 0)), revolution_arc=90, mode=Mode.SUBTRACT)
    with BuildSketch(Plane(origin=(-3.05e-15, 12.000000000000002, 7.850000000000004), x_dir=(-1, 0, -1.33e-15), z_dir=(1.33e-15, 0, -1))) as fillet1_piece_14:
        with BuildLine():
            CenterArc((3.9999999999999987 - FILLET1_R, -FILLET1_R), FILLET1_R, 0, 90)
            Line((3.9999999999999987, -FILLET1_R), (3.9999999999999987, 0))
            Line((3.9999999999999987, 0), (3.9999999999999987 - FILLET1_R, 0))
        make_face()
    revolve(axis=Axis((-3.05e-15, 12.000000000000002, 7.850000000000004), (0, 1, 0)), revolution_arc=215.36009714129503, mode=Mode.SUBTRACT)


solid = part.part
